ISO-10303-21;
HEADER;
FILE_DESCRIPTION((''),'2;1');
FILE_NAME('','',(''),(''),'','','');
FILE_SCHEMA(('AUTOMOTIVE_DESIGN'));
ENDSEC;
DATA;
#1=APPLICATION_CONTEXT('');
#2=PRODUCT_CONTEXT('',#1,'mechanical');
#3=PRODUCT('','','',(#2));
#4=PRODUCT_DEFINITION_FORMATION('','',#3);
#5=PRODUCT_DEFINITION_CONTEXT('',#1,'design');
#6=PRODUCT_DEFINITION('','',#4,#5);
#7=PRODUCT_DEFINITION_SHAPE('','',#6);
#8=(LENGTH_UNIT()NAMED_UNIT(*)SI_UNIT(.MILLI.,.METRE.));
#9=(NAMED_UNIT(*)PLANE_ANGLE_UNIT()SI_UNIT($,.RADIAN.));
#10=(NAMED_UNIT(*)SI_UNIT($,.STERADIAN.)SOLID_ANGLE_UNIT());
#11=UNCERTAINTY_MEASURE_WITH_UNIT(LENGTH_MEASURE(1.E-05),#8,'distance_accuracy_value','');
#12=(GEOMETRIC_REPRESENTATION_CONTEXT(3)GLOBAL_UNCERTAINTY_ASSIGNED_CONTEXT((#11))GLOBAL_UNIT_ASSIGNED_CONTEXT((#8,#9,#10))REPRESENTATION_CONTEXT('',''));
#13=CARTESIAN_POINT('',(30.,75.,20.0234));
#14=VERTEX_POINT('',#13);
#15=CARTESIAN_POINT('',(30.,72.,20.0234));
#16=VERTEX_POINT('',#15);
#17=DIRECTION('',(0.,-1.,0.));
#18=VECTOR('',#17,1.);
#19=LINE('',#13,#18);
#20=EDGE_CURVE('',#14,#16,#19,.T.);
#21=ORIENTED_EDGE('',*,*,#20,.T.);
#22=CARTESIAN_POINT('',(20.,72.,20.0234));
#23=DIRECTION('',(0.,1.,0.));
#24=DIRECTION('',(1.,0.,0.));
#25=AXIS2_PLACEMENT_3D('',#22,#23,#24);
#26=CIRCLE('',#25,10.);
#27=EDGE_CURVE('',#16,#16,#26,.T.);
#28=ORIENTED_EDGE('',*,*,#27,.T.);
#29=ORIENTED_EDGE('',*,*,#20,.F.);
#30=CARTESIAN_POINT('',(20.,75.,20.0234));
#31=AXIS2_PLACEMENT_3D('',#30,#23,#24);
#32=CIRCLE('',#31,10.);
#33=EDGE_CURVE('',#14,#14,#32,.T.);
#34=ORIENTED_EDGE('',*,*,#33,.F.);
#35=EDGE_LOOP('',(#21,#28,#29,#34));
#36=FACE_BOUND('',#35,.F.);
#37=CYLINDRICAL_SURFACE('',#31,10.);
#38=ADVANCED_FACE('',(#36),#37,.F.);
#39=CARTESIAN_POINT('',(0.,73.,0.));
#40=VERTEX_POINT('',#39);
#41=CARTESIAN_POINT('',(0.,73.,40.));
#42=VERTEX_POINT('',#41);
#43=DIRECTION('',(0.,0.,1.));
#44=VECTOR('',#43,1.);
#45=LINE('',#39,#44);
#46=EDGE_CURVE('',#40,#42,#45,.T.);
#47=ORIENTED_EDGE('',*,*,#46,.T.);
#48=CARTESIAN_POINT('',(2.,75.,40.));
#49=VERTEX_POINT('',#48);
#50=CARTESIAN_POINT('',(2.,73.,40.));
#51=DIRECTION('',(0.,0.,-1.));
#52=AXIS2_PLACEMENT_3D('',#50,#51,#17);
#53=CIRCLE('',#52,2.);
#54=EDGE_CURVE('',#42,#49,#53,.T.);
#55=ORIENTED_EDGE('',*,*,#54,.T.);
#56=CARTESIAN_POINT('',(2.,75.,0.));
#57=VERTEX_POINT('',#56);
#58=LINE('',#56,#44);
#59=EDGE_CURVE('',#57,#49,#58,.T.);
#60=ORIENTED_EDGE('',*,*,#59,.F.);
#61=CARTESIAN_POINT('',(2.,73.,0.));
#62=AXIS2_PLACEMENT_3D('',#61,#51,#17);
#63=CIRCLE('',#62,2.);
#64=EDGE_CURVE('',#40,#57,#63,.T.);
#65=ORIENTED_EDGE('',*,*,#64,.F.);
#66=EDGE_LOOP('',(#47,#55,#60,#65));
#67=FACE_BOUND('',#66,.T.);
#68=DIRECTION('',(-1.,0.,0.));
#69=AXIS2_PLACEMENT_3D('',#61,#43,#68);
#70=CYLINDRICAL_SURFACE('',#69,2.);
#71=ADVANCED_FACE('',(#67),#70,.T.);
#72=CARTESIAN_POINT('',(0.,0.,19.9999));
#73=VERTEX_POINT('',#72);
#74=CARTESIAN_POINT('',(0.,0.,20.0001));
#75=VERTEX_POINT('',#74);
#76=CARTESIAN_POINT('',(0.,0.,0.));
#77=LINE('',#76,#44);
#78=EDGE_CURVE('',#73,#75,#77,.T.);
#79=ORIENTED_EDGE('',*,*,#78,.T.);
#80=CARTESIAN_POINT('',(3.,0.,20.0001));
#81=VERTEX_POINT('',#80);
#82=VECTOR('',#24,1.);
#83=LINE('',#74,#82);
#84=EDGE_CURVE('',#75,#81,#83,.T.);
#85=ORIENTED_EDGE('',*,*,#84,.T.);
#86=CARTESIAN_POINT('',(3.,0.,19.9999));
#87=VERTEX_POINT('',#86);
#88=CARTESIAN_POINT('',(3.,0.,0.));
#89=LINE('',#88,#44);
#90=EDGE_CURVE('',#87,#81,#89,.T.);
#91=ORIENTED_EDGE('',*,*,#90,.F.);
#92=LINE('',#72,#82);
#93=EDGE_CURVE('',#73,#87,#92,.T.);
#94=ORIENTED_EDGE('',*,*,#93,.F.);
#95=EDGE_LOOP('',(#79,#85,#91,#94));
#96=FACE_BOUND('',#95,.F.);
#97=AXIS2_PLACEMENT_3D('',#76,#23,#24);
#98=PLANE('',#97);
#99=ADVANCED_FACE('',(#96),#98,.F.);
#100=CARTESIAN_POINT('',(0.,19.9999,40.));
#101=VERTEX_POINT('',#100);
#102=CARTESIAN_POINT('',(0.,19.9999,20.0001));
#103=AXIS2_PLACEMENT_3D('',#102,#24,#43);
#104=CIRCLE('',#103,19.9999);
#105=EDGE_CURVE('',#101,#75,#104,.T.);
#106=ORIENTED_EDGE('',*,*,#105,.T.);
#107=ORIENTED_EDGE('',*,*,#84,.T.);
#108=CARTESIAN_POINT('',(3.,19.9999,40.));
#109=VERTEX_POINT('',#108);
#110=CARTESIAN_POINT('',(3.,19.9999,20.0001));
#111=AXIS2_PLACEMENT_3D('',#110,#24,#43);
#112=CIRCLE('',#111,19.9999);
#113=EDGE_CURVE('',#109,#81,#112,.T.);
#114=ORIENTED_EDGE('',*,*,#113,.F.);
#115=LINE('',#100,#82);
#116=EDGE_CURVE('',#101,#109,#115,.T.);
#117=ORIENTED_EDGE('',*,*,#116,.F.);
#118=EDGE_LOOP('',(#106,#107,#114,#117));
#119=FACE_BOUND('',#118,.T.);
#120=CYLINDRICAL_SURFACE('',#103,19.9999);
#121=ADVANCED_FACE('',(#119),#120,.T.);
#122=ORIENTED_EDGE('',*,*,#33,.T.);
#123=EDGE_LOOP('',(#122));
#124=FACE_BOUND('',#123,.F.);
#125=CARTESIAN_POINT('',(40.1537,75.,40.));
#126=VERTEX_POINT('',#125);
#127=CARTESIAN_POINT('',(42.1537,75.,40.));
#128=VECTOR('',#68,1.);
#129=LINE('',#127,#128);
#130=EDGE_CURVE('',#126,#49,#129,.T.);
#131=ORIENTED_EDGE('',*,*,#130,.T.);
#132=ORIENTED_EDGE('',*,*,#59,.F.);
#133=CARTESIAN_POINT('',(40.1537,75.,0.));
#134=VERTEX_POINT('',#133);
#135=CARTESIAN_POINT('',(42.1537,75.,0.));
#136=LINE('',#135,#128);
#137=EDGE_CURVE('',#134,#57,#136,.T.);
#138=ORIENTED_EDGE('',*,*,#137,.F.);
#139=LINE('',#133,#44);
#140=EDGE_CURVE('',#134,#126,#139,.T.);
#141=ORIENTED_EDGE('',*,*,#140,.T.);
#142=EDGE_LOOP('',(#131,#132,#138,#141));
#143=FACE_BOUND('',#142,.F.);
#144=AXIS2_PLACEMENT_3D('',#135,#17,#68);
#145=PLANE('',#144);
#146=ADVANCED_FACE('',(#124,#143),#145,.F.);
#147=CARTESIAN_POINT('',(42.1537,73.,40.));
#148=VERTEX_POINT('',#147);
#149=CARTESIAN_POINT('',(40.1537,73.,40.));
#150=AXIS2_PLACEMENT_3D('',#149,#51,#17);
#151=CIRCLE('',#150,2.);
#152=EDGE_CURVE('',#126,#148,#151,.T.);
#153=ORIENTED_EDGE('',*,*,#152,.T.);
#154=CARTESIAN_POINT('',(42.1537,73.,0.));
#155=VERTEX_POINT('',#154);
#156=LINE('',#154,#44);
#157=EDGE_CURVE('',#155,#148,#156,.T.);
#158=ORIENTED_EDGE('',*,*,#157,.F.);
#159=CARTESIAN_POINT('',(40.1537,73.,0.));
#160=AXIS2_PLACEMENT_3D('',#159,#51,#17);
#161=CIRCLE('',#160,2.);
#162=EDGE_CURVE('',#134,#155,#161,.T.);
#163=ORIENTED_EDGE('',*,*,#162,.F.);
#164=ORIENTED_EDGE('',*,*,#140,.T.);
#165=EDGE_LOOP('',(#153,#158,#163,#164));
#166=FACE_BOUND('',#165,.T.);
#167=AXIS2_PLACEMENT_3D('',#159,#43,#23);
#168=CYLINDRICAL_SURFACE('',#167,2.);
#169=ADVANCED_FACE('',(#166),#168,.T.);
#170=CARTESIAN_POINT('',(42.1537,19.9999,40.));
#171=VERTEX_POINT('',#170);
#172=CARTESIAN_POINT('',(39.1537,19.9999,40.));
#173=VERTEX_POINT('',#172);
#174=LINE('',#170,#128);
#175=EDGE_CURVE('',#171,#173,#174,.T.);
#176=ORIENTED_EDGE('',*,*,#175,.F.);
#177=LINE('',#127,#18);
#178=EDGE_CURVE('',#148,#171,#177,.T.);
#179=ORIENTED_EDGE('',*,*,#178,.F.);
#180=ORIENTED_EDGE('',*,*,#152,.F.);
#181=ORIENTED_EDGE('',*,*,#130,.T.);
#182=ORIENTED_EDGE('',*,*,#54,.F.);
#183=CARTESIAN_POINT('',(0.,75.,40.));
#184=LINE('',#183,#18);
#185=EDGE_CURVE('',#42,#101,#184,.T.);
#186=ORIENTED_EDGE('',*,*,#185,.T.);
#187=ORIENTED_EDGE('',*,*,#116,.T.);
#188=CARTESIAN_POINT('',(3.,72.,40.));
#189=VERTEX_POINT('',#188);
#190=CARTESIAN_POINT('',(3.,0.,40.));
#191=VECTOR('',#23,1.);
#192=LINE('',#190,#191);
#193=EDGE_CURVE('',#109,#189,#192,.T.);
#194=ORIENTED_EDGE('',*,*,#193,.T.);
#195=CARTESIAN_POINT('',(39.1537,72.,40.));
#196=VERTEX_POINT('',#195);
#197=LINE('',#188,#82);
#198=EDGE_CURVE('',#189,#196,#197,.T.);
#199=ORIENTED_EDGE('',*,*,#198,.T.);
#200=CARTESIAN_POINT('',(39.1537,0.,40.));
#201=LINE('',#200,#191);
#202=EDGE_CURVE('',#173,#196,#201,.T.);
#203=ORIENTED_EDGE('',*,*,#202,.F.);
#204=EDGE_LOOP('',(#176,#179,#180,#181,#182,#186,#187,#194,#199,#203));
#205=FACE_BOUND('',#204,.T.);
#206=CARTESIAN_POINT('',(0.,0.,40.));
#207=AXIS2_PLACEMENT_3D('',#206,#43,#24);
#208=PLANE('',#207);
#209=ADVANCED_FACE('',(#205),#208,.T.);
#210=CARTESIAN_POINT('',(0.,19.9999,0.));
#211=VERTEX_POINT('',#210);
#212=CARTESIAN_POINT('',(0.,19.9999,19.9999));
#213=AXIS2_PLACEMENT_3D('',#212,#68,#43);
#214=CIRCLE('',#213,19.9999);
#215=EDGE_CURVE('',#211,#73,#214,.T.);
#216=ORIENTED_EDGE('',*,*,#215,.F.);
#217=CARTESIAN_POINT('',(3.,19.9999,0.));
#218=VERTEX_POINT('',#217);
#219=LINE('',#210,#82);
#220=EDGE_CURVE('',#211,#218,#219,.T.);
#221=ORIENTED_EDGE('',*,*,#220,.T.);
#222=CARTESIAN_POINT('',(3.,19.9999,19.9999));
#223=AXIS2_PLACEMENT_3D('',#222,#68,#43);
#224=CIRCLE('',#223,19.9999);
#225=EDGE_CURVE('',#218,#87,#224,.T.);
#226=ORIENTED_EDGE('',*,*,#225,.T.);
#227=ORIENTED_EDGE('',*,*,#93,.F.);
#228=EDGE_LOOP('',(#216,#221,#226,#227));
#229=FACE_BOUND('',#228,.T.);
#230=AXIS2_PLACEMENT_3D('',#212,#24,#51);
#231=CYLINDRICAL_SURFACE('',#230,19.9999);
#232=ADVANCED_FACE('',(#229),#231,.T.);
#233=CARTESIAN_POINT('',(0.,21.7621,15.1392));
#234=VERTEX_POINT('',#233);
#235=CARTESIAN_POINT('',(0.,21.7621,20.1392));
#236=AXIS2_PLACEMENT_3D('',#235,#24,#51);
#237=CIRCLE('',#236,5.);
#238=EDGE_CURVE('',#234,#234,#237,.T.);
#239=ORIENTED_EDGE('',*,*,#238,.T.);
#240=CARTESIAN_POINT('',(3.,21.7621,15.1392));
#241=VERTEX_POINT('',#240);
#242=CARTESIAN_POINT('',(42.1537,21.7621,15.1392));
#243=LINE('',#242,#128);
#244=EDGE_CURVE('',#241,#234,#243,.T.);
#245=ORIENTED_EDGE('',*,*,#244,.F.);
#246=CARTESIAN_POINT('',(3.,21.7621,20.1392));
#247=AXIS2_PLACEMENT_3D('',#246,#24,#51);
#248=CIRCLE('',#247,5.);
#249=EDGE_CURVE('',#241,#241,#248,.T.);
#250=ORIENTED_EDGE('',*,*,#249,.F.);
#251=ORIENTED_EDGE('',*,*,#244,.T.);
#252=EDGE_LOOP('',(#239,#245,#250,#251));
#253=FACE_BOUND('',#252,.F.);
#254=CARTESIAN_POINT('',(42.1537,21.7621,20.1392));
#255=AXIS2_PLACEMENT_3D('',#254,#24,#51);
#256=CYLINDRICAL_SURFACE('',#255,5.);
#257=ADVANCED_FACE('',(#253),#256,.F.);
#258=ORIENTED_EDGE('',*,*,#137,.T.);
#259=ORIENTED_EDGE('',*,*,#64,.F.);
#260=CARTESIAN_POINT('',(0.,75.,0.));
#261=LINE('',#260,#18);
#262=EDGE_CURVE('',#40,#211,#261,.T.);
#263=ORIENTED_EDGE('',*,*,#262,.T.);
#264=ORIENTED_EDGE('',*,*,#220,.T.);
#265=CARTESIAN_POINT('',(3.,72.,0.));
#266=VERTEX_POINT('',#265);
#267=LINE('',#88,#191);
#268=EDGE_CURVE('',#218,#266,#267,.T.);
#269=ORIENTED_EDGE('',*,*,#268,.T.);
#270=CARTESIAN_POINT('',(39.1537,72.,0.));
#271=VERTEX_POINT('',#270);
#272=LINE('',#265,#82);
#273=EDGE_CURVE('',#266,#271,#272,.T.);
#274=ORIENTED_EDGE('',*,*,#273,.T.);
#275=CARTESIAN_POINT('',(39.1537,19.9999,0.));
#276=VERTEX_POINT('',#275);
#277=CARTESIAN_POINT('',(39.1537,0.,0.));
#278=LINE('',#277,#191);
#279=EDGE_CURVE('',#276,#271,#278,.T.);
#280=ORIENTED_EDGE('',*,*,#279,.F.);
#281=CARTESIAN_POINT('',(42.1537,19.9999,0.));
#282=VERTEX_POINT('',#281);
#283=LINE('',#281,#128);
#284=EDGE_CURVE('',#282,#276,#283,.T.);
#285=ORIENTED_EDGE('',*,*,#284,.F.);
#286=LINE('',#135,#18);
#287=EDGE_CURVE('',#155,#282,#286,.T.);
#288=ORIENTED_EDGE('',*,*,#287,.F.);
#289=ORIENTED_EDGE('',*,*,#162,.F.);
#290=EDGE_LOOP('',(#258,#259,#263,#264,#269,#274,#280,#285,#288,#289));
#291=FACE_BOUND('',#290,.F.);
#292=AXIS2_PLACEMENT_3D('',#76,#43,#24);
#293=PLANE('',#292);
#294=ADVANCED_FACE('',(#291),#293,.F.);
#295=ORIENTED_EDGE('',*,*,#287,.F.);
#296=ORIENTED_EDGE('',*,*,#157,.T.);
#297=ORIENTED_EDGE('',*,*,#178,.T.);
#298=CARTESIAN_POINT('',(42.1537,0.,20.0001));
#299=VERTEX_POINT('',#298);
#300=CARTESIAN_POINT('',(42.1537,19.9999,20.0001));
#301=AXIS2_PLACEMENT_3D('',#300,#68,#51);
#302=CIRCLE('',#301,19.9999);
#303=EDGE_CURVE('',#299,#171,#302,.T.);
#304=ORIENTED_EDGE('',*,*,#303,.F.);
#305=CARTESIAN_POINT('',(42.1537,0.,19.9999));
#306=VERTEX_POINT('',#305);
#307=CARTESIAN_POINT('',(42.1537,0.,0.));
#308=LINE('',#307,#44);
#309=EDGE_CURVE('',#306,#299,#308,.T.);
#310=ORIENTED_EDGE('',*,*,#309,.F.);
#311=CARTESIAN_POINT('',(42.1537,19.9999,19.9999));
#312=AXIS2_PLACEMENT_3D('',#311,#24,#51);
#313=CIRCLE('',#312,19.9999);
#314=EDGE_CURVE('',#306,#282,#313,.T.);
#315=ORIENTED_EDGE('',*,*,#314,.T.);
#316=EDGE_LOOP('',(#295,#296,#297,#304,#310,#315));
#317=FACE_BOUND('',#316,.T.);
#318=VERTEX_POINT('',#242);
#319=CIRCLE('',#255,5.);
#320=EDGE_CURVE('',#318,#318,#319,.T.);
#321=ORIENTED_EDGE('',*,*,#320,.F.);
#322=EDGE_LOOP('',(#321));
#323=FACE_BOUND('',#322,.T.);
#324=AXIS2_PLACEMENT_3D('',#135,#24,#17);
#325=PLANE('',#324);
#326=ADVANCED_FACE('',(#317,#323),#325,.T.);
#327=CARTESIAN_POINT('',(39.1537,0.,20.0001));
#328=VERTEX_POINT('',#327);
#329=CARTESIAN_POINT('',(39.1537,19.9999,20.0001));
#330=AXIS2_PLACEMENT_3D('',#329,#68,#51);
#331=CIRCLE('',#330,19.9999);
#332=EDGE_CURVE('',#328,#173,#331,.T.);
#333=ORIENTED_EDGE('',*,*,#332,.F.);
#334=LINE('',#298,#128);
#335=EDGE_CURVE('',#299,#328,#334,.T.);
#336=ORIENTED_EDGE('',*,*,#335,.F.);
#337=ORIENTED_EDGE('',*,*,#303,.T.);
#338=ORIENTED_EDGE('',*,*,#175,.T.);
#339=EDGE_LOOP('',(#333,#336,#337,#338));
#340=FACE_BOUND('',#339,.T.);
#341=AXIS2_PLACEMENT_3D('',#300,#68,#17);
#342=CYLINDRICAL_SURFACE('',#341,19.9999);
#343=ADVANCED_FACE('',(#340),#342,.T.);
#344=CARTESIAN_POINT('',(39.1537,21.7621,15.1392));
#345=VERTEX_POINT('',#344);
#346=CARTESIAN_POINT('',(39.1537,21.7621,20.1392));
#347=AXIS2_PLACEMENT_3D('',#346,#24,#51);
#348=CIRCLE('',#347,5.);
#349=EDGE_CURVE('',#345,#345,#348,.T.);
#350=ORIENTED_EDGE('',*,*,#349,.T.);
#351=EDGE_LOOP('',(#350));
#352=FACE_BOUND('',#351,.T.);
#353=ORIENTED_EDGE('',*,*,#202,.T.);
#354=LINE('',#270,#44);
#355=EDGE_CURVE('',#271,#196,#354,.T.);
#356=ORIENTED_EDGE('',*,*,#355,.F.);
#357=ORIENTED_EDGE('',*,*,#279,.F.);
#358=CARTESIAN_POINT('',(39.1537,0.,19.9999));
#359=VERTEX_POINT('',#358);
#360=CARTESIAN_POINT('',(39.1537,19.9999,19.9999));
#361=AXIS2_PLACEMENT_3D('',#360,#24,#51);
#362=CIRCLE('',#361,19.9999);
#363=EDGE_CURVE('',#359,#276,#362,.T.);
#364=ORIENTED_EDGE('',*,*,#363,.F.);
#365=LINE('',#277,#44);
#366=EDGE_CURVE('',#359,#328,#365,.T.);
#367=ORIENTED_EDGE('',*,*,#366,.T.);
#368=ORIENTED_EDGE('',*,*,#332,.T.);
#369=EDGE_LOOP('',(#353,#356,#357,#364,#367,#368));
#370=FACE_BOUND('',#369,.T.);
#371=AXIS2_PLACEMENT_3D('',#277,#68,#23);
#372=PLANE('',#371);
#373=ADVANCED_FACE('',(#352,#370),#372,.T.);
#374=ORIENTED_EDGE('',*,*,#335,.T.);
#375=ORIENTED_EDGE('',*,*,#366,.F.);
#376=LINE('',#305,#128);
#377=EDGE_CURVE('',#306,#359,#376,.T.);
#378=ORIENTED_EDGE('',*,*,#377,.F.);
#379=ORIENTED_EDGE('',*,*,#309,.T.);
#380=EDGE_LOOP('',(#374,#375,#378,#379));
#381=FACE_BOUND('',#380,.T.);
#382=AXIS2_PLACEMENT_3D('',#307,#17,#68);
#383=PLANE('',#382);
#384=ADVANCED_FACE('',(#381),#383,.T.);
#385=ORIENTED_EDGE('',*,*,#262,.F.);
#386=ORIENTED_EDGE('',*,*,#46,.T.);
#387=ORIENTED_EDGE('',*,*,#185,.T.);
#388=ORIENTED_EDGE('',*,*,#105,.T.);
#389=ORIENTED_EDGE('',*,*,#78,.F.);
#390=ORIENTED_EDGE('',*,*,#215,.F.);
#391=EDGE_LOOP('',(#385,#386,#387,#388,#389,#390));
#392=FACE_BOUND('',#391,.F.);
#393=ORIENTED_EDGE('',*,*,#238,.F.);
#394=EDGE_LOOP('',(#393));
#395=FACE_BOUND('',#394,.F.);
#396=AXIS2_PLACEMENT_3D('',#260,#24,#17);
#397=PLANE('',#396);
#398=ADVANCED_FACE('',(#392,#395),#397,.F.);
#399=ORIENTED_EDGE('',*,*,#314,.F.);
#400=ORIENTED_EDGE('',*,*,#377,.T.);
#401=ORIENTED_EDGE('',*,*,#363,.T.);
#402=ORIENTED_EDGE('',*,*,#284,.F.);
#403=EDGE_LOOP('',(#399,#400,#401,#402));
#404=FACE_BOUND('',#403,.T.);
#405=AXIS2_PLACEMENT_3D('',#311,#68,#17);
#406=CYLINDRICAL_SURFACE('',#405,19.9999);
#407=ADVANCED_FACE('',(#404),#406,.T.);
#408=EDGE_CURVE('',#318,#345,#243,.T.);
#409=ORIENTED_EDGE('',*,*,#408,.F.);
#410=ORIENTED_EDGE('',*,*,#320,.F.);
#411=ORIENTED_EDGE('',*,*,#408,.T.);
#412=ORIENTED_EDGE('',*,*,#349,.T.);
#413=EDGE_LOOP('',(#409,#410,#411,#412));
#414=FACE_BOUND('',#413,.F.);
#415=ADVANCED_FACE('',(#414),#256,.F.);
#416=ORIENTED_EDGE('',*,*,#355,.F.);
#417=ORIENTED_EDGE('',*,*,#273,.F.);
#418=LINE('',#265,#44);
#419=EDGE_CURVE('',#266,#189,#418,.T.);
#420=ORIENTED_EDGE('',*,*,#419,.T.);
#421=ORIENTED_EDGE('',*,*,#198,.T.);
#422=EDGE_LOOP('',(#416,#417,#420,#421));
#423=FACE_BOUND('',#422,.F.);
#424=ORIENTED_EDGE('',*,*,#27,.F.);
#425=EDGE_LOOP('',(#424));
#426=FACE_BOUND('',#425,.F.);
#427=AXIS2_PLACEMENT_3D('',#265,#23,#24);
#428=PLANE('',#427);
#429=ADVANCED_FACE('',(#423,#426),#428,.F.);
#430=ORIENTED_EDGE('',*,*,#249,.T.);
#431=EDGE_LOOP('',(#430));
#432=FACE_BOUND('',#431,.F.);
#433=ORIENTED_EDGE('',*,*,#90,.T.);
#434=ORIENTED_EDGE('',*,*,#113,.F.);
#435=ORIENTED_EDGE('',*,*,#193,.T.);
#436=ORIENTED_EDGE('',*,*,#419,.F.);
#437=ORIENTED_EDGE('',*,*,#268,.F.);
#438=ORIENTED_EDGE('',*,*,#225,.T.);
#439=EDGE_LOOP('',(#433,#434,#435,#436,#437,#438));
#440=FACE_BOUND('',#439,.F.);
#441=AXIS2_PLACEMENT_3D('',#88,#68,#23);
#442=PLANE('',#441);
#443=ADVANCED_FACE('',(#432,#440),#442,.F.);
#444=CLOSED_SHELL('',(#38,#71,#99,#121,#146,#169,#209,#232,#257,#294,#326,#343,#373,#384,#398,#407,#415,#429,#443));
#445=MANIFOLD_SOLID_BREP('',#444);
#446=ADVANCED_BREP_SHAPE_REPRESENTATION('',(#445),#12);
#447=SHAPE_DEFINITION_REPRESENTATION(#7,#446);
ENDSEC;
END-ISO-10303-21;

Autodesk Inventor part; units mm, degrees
ref_plane "YZ Plane" through (0, 0, 0) normal (1, 0, 0) x (0, 1, 0)
ref_plane "XZ Plane" through (0, 0, 0) normal (0, 1, 0) x (-1, 0, 0)
ref_plane "XY Plane" through (0, 0, 0) normal (0, 0, 1) x (1, 0, 0)
sketch "Sketch1" plane through (0, 0, 0) normal (0, 0, 1) x (1, 0, 0)
  line L0 (0, 0) -> (3, 0)
  line L1 (3, 0) -> (3, 72)
  line L2 (3, 72) -> (39.1537, 72)
  line L3 (42.1537, 75) -> (0, 75)
  line L4 (0, 75) -> (0, 0)
  line L5 (42.1537, 75) -> (42.1537, 0)
  line L6 (42.1537, 0) -> (39.1537, 0)
  line L7 (39.1537, 0) -> (39.1537, 72)
  dimension "d0" = 75
  dimension "d1" = 3
  dimension "d3" = 3
extrude "Extrusion1" add sketch "Sketch1" along normal blind 40
fillet "Fillet1" radius 20 2 edges at (40.6537, 0, 40) (40.6537, 0, 0)
fillet "Fillet2" radius 20 2 edges at (1.5, 0, 40) (1.5, 0, 0)
sketch "Sketch2" plane through (42.1537, 75, 40) normal (1, 0, 0) x (0, 0, -1)
  circle A0 centre (19.8608, -53.2379) radius 5
  point P0 (40, -75)
  dimension "d8" = 10
extrude "Extrusion2" cut sketch "Sketch2" against normal blind 50
sketch "Sketch3" plane through (0, 75, 0) normal (0, 1, 0) x (1, 0, 0)
  circle A0 centre (20, -20.0234) radius 10
  line L0 (0, 0) -> (0, -40) projected
  dimension "d11" = 20
  dimension "d12" = 20
sketch "Sketch4" plane through (0, 75, 0) normal (0, 1, 0) x (1, 0, 0)
  point P0 (0, 0)
extrude "Extrusion3" cut sketch "Sketch3" against normal through all
fillet "Fillet3" radius 2 2 edges at (42.1537, 75, 20) (0, 75, 20)
sketch "Sketch5" plane through (2, 75, 0) normal (0, 1, 0) x (1, 0, 0)
  point P0 (-2, 0)
sketch "Sketch6" plane through (42.1537, 20, 20) normal (1, 0, 0) x (0, 0, -1)
  point P0 (20, -20)
properties part number "peca1" material "Steel, Carbon"
